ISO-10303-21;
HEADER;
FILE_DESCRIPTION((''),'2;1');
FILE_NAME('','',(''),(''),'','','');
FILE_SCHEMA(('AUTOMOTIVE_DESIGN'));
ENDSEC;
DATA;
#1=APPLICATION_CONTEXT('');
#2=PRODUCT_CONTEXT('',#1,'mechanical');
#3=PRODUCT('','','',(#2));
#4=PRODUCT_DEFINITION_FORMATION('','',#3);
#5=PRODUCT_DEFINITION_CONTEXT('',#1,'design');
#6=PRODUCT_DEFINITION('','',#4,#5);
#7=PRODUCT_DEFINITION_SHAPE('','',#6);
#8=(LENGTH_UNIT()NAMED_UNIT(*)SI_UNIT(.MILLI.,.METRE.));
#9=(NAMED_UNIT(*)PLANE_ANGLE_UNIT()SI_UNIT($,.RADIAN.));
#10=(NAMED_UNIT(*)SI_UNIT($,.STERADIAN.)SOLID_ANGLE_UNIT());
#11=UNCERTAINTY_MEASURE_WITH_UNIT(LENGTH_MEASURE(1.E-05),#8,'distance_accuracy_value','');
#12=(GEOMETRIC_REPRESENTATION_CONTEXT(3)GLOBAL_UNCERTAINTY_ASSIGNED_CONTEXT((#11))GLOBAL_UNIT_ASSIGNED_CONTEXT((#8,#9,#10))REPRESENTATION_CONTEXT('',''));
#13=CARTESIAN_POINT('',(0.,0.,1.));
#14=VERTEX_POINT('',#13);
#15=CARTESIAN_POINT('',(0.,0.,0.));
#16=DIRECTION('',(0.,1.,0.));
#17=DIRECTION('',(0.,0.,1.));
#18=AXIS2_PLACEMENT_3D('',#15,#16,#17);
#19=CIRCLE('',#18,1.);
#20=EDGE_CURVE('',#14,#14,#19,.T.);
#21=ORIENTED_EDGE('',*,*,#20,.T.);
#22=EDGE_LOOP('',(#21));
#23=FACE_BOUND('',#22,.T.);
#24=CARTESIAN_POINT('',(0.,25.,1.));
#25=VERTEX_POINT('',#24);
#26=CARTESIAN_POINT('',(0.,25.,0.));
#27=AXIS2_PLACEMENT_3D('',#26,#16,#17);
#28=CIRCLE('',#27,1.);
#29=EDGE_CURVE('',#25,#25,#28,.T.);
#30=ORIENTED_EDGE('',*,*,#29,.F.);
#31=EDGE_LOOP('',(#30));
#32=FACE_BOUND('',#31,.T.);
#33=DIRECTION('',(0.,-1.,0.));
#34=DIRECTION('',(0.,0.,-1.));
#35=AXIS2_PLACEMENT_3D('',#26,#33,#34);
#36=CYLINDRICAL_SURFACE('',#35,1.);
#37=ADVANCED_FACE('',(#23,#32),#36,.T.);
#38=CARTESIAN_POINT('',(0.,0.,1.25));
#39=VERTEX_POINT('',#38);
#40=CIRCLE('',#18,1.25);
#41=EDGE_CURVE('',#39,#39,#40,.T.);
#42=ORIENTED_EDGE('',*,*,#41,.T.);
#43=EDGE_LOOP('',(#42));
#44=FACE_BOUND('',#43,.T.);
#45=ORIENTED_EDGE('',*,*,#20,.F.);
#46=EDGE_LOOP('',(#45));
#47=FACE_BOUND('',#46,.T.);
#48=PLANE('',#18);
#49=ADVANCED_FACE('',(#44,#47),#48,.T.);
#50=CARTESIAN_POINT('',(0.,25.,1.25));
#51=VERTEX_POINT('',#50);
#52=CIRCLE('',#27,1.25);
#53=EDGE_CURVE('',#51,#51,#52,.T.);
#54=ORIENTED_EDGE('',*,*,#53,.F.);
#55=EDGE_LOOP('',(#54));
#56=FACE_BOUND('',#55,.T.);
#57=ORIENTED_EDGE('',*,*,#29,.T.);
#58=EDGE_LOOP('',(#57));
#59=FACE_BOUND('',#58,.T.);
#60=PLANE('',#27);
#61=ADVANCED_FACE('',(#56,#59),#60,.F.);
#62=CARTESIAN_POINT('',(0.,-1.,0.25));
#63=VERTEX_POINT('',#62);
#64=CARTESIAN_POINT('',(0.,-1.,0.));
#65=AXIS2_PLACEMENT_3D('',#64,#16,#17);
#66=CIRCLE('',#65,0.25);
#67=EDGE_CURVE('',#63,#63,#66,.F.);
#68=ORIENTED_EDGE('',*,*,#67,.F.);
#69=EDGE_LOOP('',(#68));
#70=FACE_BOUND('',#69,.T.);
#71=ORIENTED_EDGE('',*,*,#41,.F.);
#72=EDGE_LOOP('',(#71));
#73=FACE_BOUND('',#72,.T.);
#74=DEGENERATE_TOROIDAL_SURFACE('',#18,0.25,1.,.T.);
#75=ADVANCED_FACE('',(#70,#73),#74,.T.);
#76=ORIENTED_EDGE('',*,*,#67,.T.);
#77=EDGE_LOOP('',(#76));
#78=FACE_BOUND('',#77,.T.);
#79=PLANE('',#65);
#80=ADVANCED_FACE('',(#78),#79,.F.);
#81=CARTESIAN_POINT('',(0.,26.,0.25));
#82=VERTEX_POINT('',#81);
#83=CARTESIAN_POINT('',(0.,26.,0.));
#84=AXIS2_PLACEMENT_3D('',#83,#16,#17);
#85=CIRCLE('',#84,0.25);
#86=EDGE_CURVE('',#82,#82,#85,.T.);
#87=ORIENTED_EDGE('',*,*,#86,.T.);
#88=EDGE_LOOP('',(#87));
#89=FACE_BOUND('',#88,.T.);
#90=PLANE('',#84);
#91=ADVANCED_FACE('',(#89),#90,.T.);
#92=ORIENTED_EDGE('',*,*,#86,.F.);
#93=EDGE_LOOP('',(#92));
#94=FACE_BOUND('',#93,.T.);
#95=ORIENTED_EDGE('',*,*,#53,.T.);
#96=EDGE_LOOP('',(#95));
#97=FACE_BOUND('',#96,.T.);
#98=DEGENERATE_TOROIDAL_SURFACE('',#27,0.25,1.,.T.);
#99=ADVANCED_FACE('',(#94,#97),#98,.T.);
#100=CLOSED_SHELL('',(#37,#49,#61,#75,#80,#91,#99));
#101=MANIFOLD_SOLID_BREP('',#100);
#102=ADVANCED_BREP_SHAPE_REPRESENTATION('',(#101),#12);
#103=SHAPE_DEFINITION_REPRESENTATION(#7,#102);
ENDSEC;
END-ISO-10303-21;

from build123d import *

# Parameters (mm, degrees)
SKETCH1_R           = 1
BOSS_EXTRUDE1_DEPTH = 25
SKETCH2_R           = 1.25
BOSS_EXTRUDE2_DEPTH = 1
FILLET1_R           = 1
BOSS_EXTRUDE5_START = 26
SKETCH3_R           = 1.25
BOSS_EXTRUDE5_DEPTH = 1
FILLET2_R           = 1


with BuildPart() as part:
    # Sketch1 → Boss-Extrude1 (new body)
    with BuildSketch(Plane(origin=(0, 0, 0), x_dir=(1, 0, 0), z_dir=(0, 1, 0))):
        with Locations(Location((0, 0, 0), (0, 0, 270))):
            Circle(SKETCH1_R)
    extrude(amount=BOSS_EXTRUDE1_DEPTH)

    # Sketch2 → Boss-Extrude2 (add)
    with BuildSketch(Plane(origin=(0, 0, 0), x_dir=(1, 0, 0), z_dir=(0, 1, 0))):
        with Locations(Location((0, 0, 0), (0, 0, 270))):
            Circle(SKETCH2_R)
    extrude(amount=-BOSS_EXTRUDE2_DEPTH)

    # Fillet1
    fillet1_edges = [part.edges().sort_by_distance(p)[0] for p in [
        (0, -1, -1.25),
    ]]
    fillet(fillet1_edges, radius=FILLET1_R - 0.0001)  # a hair under: the kernel refuses the full size

    # Sketch3 → Boss-Extrude5 (add)
    with BuildSketch(Plane(origin=(0, 0, 0), x_dir=(1, 0, 0), z_dir=(0, 1, 0)).offset(BOSS_EXTRUDE5_START)):
        with Locations(Location((0, 0, 0), (0, 0, 270))):
            Circle(SKETCH3_R)
    extrude(amount=-BOSS_EXTRUDE5_DEPTH)

    # Fillet2
    fillet2_edges = [part.edges().sort_by_distance(p)[0] for p in [
        (0, 26, -1.25),
    ]]
    fillet(fillet2_edges, radius=FILLET2_R - 0.0001)  # a hair under: the kernel refuses the full size


solid = part.part
